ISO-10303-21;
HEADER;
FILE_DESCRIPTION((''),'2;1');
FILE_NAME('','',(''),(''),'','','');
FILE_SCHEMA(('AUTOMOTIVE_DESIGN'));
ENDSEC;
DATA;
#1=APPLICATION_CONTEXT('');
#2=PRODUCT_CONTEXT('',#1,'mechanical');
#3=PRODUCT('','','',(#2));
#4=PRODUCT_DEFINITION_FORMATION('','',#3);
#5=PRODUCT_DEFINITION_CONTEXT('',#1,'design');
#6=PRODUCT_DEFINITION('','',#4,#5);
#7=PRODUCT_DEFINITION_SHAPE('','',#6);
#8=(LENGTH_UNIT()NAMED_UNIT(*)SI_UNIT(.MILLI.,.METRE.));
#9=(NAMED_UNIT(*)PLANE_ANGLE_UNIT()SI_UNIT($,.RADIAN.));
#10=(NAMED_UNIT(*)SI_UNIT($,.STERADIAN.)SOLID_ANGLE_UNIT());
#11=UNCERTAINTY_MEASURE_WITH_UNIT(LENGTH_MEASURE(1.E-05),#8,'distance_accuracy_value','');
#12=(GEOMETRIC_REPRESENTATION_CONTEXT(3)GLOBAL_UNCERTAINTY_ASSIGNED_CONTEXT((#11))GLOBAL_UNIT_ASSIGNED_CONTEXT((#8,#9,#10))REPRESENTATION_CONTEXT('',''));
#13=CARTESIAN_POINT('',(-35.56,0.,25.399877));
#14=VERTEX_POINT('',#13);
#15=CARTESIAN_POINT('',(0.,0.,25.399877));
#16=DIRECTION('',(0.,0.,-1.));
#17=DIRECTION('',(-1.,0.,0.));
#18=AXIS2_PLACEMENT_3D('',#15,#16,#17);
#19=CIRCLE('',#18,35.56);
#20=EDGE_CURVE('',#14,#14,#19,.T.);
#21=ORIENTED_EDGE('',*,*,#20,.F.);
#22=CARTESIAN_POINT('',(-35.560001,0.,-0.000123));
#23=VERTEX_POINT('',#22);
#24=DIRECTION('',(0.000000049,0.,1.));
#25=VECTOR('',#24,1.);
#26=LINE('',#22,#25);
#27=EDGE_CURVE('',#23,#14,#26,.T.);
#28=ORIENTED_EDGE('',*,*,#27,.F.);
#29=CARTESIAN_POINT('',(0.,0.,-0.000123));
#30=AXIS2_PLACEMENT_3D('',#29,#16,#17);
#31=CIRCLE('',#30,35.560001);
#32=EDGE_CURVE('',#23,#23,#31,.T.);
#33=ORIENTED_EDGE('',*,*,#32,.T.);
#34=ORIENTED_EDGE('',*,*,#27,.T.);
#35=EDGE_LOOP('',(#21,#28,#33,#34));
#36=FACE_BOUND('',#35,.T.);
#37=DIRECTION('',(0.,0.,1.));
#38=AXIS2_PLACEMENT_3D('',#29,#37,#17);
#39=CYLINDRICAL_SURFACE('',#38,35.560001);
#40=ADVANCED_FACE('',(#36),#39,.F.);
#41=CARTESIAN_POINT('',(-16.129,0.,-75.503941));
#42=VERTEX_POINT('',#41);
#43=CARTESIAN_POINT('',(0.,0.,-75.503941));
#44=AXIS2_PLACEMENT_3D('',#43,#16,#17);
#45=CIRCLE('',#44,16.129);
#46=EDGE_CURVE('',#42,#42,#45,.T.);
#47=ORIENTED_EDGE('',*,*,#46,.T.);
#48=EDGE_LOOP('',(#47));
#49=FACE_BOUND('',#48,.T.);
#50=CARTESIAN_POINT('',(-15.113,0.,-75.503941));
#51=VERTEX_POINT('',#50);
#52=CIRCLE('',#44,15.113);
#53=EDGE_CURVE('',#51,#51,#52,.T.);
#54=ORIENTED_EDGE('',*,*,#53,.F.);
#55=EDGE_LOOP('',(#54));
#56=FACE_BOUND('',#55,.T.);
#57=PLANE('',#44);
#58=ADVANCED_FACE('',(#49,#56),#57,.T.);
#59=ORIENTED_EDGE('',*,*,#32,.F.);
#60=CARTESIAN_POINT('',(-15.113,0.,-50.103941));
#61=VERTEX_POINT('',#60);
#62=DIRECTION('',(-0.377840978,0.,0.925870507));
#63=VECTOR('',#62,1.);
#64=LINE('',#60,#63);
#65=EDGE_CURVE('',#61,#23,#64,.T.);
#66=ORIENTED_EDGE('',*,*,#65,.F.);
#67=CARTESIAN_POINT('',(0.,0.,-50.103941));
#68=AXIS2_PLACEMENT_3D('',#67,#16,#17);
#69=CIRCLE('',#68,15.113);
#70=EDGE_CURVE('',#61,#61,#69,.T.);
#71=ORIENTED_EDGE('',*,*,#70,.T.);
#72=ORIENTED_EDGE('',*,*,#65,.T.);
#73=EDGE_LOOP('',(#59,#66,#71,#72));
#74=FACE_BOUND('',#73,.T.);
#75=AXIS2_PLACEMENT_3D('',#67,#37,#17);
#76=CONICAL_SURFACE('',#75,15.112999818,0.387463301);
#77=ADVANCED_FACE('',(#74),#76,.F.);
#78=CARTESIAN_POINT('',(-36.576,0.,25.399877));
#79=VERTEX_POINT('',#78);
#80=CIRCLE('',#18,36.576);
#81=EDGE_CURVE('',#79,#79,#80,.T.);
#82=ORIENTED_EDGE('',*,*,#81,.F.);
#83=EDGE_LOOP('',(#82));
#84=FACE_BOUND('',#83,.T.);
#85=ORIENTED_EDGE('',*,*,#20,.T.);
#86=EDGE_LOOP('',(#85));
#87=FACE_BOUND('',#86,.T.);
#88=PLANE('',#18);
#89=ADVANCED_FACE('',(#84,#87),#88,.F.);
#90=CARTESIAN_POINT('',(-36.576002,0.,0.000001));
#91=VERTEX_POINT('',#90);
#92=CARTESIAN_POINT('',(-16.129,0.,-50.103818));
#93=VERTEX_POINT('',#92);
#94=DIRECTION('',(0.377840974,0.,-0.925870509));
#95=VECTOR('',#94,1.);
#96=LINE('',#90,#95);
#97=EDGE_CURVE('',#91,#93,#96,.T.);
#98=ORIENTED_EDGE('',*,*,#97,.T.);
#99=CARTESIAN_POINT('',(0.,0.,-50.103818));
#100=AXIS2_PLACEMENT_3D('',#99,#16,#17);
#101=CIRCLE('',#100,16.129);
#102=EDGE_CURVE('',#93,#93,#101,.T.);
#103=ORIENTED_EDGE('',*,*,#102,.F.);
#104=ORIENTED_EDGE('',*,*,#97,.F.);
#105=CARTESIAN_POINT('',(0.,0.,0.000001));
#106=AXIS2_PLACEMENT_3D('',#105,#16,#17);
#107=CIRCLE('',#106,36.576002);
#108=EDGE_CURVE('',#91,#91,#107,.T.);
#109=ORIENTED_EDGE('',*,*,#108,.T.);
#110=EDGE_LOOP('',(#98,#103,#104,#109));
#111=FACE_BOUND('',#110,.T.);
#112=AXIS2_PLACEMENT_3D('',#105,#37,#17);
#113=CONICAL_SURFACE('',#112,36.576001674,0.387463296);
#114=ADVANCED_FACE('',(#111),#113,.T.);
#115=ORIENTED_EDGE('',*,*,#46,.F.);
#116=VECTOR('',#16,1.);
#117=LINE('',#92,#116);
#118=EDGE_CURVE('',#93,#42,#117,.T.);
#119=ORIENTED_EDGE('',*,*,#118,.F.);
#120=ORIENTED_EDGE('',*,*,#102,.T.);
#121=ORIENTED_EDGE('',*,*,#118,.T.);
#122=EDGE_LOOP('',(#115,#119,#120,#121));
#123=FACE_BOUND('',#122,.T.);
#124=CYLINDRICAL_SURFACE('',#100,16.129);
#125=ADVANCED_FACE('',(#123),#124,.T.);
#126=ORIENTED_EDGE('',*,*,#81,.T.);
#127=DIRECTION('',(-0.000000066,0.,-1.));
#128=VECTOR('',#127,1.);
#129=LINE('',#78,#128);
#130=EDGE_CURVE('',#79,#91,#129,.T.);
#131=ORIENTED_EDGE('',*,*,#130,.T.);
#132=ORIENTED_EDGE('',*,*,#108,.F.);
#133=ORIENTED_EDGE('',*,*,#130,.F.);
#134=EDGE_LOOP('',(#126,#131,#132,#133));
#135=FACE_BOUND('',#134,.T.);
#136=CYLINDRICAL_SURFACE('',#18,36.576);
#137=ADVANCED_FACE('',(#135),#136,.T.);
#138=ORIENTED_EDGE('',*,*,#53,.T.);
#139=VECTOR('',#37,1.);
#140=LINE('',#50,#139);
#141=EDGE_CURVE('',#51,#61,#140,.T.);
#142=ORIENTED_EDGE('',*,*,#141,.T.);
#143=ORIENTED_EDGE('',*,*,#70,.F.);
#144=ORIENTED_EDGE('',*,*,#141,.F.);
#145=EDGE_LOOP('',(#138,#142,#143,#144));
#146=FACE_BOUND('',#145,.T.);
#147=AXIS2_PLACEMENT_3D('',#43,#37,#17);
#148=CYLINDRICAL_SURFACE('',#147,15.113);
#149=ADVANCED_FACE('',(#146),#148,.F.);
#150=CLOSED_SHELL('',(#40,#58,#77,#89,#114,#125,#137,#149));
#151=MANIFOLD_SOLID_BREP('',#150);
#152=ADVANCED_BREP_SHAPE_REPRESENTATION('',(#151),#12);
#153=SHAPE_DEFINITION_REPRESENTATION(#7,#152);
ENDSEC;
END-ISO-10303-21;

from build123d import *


# Not quite as in the source:
# - ends of sketch curves that miss each other by under 0.0002 mm in the source are joined


with BuildPart() as f1:
    # F0 (on Front) → F1 (revolve)
    with BuildSketch(Plane.XZ):
        Polygon((-15.113, -75.5039413649), (-15.113, -50.1039413649), (-16.1289999974, -50.1038177847), (-16.1289999982, -75.5039413649), align=None)
        Polygon((-15.1129998177, -50.1039412905), (-35.5600012367, -0.0001234082), (-36.5760016743, 7.015e-07), (-16.1290002526, -50.1038178889), align=None)
        Polygon((-36.5760016743, 7.015e-07), (-35.5600012367, -0.0001228868), (-35.56, 25.3998765918), (-36.5759999982, 25.3998765918), align=None)
    revolve(axis=Axis((0, 0, -37.7519706824), (0, 0, -1)))


solid = f1.part
